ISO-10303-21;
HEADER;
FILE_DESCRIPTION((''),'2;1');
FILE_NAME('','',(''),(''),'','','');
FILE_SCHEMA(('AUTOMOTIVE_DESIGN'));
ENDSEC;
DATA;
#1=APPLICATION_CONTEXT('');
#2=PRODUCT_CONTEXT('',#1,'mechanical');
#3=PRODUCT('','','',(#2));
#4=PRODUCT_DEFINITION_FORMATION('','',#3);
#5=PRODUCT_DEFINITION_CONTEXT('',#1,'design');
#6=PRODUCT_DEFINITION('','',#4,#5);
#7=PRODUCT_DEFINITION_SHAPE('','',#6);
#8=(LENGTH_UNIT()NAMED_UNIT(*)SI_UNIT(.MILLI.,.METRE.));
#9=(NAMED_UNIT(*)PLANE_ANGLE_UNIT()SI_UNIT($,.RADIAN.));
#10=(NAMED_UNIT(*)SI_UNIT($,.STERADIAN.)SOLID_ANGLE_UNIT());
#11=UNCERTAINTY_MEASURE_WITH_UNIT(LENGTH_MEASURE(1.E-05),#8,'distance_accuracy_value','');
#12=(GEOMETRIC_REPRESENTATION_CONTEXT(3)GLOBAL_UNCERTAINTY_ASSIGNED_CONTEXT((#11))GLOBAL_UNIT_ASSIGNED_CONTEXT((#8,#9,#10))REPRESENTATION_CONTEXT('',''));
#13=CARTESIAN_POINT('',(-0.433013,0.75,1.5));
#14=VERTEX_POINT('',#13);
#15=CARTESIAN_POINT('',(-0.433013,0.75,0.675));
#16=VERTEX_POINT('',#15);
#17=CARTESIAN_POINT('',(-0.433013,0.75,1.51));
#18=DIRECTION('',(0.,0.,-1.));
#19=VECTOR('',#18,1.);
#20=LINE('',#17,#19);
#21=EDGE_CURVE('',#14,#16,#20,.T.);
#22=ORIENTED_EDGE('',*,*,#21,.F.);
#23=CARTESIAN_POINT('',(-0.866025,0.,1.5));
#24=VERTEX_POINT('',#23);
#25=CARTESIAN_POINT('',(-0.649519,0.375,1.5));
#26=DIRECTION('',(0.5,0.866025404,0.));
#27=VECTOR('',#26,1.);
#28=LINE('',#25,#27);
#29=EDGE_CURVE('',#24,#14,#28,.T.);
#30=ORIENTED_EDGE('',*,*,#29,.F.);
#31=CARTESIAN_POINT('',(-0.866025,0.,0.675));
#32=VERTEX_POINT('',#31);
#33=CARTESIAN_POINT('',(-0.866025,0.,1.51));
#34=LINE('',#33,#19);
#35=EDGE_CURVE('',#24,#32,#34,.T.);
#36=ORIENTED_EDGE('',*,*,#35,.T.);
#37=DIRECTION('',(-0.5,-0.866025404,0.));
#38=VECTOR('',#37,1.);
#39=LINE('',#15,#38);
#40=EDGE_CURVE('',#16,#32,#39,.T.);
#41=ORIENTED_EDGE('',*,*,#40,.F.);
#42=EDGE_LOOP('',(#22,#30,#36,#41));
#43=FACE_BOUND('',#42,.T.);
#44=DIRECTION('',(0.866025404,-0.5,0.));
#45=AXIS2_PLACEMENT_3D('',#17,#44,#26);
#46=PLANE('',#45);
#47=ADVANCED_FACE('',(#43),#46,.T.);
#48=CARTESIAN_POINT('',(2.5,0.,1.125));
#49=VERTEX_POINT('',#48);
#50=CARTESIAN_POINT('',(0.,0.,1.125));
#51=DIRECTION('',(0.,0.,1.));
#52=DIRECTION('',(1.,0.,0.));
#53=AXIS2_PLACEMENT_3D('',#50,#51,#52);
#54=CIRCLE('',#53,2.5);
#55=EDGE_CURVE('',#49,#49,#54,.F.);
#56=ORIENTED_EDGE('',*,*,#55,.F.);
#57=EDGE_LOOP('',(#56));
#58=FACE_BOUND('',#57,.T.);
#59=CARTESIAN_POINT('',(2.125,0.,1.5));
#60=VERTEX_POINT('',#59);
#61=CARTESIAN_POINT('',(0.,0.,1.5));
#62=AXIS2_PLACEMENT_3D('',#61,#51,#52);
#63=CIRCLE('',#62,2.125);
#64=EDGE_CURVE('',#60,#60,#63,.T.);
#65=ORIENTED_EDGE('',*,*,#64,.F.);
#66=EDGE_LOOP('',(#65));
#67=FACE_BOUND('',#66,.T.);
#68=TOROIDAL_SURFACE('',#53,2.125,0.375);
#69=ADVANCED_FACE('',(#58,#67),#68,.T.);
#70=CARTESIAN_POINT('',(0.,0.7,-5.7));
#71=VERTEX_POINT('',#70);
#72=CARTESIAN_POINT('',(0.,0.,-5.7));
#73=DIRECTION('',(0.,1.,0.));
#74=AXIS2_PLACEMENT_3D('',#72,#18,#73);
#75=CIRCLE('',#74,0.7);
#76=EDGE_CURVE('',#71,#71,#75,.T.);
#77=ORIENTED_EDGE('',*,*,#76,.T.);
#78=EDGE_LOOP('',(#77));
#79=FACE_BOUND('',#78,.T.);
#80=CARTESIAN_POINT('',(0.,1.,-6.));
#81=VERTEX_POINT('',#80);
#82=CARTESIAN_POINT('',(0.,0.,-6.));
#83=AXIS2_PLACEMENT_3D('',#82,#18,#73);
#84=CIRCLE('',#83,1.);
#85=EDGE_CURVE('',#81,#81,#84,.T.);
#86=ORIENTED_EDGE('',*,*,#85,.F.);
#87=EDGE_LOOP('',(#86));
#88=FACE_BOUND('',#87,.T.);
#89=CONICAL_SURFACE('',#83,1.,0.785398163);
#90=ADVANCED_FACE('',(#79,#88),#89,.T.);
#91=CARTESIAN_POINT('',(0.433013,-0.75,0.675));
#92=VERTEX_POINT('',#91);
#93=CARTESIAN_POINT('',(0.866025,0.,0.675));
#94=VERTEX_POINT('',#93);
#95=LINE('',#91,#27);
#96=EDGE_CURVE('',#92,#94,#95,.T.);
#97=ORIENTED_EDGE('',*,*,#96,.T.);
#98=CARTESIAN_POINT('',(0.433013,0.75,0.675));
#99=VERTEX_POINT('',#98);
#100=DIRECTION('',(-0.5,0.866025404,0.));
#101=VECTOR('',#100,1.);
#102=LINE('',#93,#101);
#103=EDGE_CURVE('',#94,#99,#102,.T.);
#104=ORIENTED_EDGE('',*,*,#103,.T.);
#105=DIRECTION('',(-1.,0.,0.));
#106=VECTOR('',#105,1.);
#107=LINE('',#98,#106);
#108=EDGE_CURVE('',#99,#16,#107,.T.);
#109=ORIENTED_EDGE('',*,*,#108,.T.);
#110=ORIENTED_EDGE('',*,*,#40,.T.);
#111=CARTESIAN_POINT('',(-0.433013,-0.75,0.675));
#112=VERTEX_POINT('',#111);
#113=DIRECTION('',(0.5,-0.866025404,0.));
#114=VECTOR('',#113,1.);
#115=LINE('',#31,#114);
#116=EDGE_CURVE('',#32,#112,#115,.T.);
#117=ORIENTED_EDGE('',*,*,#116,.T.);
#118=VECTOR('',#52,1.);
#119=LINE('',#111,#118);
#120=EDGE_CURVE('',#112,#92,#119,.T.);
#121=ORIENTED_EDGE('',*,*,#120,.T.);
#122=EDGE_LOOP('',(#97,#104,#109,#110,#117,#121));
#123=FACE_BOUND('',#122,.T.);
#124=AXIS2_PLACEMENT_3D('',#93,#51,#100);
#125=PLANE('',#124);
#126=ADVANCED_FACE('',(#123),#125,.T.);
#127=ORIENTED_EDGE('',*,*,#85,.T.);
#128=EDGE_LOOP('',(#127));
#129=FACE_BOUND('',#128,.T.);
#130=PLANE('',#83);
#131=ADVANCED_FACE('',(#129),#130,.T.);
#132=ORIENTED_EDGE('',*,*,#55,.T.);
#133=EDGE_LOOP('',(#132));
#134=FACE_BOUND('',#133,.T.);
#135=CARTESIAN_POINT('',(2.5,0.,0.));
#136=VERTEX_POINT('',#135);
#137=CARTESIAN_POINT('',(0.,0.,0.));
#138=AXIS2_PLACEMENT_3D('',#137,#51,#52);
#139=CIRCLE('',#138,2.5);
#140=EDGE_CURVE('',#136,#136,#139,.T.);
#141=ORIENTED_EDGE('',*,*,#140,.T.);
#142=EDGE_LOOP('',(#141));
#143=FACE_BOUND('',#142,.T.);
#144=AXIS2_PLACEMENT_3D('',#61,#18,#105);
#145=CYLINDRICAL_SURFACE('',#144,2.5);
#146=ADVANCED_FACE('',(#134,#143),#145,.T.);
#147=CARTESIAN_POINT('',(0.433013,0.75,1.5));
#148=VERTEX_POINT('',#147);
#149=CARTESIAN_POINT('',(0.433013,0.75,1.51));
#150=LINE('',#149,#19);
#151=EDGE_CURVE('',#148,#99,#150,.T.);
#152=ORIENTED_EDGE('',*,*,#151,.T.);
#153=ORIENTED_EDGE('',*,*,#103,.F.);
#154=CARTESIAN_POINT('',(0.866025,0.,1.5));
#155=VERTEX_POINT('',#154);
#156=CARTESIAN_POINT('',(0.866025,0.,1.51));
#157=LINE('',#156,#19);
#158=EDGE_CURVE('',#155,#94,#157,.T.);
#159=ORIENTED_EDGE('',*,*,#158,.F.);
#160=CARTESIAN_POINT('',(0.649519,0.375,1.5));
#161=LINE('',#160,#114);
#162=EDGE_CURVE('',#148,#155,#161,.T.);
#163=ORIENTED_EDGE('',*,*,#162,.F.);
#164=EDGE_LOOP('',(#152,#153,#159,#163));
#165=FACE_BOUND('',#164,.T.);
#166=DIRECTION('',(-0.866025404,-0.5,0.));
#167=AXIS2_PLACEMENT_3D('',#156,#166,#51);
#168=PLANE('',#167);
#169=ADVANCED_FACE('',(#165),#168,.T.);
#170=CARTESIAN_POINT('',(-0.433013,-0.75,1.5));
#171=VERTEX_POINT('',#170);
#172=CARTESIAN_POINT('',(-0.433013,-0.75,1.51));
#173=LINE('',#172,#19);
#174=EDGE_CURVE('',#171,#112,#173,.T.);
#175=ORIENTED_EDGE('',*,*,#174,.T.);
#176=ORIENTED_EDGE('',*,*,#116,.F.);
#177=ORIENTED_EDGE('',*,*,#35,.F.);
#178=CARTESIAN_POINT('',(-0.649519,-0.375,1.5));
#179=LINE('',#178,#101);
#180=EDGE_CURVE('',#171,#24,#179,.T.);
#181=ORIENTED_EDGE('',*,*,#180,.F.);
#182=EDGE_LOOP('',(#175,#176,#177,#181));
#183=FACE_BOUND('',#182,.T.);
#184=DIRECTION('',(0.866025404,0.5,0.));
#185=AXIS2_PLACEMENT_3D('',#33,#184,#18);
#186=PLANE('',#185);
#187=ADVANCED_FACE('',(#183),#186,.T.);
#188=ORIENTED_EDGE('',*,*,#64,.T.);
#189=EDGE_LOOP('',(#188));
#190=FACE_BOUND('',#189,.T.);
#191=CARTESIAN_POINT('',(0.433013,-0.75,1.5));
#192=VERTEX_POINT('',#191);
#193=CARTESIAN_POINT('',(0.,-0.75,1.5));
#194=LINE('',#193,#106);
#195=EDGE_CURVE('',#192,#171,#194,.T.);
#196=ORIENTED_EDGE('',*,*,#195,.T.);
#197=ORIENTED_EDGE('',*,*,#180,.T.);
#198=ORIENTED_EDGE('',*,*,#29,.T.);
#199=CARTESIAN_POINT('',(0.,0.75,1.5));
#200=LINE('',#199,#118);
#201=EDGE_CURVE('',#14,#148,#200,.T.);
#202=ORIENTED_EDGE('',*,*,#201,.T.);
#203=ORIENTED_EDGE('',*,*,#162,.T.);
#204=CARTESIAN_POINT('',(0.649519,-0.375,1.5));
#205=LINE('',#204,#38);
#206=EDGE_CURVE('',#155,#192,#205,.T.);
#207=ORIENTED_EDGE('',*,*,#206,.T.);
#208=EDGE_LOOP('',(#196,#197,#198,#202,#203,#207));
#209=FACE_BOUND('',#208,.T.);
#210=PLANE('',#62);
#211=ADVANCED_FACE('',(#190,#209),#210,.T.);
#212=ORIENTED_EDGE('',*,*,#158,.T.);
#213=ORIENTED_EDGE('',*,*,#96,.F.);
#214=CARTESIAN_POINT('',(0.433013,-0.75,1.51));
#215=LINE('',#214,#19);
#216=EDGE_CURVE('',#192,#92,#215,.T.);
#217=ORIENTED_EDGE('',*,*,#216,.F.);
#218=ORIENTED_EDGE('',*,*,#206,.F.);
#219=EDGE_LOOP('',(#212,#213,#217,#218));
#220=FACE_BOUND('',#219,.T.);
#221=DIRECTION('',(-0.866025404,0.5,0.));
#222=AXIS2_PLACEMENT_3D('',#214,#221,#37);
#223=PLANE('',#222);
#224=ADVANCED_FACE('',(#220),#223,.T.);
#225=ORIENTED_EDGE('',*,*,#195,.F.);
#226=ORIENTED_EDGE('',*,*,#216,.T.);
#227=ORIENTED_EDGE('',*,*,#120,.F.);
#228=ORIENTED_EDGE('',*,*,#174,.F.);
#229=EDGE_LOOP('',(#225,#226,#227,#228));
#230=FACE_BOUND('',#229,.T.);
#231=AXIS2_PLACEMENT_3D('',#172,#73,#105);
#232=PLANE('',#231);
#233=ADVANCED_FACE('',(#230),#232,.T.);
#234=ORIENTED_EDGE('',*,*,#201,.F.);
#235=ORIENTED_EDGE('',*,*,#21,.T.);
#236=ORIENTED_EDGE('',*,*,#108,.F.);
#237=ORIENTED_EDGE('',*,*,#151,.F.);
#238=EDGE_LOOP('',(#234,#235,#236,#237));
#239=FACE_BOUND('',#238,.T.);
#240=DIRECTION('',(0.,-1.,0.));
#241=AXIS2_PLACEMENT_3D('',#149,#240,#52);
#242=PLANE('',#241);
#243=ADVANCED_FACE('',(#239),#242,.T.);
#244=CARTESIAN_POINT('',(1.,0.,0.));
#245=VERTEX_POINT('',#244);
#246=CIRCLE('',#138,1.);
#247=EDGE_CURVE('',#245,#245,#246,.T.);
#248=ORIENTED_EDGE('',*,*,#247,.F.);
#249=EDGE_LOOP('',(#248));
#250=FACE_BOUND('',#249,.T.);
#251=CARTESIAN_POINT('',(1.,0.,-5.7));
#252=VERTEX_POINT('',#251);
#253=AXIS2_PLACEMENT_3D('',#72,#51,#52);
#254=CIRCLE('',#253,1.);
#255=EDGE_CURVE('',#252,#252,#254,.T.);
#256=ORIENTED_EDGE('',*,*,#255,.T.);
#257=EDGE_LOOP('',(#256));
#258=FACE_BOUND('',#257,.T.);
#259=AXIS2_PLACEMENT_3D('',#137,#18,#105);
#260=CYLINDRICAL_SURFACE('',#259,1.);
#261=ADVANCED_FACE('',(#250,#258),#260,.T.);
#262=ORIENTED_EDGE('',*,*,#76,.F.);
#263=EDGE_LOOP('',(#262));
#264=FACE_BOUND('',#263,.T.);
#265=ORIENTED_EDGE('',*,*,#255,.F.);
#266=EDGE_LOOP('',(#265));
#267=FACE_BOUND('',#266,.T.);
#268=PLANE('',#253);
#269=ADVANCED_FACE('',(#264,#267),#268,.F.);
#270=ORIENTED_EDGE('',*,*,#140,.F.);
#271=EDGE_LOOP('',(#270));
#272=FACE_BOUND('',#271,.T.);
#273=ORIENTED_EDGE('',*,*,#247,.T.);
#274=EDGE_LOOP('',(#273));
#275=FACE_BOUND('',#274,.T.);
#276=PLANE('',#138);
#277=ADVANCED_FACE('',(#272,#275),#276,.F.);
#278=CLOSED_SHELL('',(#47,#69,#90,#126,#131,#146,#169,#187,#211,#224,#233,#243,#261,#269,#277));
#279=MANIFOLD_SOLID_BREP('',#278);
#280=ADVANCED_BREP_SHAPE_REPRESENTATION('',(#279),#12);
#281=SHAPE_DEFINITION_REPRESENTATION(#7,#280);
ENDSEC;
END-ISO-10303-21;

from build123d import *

# Parameters (mm, degrees)
F_0135_CYLINDER_SKETCH_R    = 2.5
F_0135_CYLINDER_DEPTH       = 1.5
F_0136_FILLET_R             = 0.375
F_0137_EXTRUDE_DEPTH        = 0.835
F_0137_EXTRUDE_ROTATE_ANGLE = 120
F_0140_CYLINDER_SKETCH_R    = 1
F_0140_CYLINDER_DEPTH       = 5.7
F_0141_CONE_ROTATE_ANGLE    = 90


with BuildPart() as part:
    # 0135_cylinder_Sketch → 0135_cylinder (new body)
    with BuildSketch(Plane.XY):
        Circle(F_0135_CYLINDER_SKETCH_R)
    extrude(amount=F_0135_CYLINDER_DEPTH)

    # 0136_fillet
    f_0136_fillet_edges = [part.edges().sort_by_distance(p)[0] for p in [
        (-2.5, 0, 1.5),
    ]]
    fillet(f_0136_fillet_edges, radius=F_0136_FILLET_R)


with BuildPart() as body_2:
    # 0137_extrude_Sketch → 0137_extrude (new body)
    with BuildSketch(Plane.XY):
        Polygon((0, 0), (0.866025404, 0), (1.299038106, 0.75), (0.866025404, 1.5), (0, 1.5), (-0.433012702, 0.75), align=None)
    extrude(amount=F_0137_EXTRUDE_DEPTH)


with BuildPart() as body_2_1:
    # 0137_extrude_Rotate: read off the stored shape, not the designer's step
    # 0137_extrude_Rotate: moved
    add(body_2.part.rotate(Axis((0, 0, 0), (0, 0, 1)), F_0137_EXTRUDE_ROTATE_ANGLE))


with BuildPart() as body_2_2:
    # 0137_extrude_Translate: moved
    add(body_2_1.part.moved(Location((0.866025404, 0, 0.675))))


with BuildPart() as part_1:
    add(part.part)

    # 0139_sub: cut body 2
    add(body_2_2.part, mode=Mode.SUBTRACT)


with BuildPart() as body_2_2_1:
    # 0140_cylinder_Sketch → 0140_cylinder (new body)
    with BuildSketch(Plane.XY):
        Circle(F_0140_CYLINDER_SKETCH_R)
    extrude(amount=F_0140_CYLINDER_DEPTH)


with BuildPart() as body_2_2_2:
    # 0140_cylinder_Translate: moved
    add(body_2_2_1.part.moved(Location((0, 0, -5.7))))


with BuildPart() as body_3:
    # 0141_cone_Sketch → 0141_cone (revolve)
    with BuildSketch(Plane.XY, mode=Mode.PRIVATE) as f_0141_cone_sk:
        Polygon((0, 0), (1, 0), (0.7, 0.3), (0, 0.3), align=None)
    revolve(f_0141_cone_sk.sketch.rotate(Axis((0, -100, 0), (0, 1, 0)), 90), axis=Axis((0, -100, 0), (0, 1, 0)))


with BuildPart() as body_3_1:
    # 0141_cone_Rotate: moved
    add(body_3.part.rotate(Axis((0, 0, 0), (1, 0, 0)), F_0141_CONE_ROTATE_ANGLE))


with BuildPart() as body_3_2:
    # 0141_cone_Translate: moved
    add(body_3_1.part.moved(Location((0, 0, -6))))


with BuildPart() as body_2_2_3:
    add(body_2_2_2.part)

    # 0143_add: union body 3
    add(body_3_2.part)


with BuildPart() as part_2:
    add(part_1.part)

    # 0144_add: union body 2 2
    add(body_2_2_3.part)


solid = part_2.part
